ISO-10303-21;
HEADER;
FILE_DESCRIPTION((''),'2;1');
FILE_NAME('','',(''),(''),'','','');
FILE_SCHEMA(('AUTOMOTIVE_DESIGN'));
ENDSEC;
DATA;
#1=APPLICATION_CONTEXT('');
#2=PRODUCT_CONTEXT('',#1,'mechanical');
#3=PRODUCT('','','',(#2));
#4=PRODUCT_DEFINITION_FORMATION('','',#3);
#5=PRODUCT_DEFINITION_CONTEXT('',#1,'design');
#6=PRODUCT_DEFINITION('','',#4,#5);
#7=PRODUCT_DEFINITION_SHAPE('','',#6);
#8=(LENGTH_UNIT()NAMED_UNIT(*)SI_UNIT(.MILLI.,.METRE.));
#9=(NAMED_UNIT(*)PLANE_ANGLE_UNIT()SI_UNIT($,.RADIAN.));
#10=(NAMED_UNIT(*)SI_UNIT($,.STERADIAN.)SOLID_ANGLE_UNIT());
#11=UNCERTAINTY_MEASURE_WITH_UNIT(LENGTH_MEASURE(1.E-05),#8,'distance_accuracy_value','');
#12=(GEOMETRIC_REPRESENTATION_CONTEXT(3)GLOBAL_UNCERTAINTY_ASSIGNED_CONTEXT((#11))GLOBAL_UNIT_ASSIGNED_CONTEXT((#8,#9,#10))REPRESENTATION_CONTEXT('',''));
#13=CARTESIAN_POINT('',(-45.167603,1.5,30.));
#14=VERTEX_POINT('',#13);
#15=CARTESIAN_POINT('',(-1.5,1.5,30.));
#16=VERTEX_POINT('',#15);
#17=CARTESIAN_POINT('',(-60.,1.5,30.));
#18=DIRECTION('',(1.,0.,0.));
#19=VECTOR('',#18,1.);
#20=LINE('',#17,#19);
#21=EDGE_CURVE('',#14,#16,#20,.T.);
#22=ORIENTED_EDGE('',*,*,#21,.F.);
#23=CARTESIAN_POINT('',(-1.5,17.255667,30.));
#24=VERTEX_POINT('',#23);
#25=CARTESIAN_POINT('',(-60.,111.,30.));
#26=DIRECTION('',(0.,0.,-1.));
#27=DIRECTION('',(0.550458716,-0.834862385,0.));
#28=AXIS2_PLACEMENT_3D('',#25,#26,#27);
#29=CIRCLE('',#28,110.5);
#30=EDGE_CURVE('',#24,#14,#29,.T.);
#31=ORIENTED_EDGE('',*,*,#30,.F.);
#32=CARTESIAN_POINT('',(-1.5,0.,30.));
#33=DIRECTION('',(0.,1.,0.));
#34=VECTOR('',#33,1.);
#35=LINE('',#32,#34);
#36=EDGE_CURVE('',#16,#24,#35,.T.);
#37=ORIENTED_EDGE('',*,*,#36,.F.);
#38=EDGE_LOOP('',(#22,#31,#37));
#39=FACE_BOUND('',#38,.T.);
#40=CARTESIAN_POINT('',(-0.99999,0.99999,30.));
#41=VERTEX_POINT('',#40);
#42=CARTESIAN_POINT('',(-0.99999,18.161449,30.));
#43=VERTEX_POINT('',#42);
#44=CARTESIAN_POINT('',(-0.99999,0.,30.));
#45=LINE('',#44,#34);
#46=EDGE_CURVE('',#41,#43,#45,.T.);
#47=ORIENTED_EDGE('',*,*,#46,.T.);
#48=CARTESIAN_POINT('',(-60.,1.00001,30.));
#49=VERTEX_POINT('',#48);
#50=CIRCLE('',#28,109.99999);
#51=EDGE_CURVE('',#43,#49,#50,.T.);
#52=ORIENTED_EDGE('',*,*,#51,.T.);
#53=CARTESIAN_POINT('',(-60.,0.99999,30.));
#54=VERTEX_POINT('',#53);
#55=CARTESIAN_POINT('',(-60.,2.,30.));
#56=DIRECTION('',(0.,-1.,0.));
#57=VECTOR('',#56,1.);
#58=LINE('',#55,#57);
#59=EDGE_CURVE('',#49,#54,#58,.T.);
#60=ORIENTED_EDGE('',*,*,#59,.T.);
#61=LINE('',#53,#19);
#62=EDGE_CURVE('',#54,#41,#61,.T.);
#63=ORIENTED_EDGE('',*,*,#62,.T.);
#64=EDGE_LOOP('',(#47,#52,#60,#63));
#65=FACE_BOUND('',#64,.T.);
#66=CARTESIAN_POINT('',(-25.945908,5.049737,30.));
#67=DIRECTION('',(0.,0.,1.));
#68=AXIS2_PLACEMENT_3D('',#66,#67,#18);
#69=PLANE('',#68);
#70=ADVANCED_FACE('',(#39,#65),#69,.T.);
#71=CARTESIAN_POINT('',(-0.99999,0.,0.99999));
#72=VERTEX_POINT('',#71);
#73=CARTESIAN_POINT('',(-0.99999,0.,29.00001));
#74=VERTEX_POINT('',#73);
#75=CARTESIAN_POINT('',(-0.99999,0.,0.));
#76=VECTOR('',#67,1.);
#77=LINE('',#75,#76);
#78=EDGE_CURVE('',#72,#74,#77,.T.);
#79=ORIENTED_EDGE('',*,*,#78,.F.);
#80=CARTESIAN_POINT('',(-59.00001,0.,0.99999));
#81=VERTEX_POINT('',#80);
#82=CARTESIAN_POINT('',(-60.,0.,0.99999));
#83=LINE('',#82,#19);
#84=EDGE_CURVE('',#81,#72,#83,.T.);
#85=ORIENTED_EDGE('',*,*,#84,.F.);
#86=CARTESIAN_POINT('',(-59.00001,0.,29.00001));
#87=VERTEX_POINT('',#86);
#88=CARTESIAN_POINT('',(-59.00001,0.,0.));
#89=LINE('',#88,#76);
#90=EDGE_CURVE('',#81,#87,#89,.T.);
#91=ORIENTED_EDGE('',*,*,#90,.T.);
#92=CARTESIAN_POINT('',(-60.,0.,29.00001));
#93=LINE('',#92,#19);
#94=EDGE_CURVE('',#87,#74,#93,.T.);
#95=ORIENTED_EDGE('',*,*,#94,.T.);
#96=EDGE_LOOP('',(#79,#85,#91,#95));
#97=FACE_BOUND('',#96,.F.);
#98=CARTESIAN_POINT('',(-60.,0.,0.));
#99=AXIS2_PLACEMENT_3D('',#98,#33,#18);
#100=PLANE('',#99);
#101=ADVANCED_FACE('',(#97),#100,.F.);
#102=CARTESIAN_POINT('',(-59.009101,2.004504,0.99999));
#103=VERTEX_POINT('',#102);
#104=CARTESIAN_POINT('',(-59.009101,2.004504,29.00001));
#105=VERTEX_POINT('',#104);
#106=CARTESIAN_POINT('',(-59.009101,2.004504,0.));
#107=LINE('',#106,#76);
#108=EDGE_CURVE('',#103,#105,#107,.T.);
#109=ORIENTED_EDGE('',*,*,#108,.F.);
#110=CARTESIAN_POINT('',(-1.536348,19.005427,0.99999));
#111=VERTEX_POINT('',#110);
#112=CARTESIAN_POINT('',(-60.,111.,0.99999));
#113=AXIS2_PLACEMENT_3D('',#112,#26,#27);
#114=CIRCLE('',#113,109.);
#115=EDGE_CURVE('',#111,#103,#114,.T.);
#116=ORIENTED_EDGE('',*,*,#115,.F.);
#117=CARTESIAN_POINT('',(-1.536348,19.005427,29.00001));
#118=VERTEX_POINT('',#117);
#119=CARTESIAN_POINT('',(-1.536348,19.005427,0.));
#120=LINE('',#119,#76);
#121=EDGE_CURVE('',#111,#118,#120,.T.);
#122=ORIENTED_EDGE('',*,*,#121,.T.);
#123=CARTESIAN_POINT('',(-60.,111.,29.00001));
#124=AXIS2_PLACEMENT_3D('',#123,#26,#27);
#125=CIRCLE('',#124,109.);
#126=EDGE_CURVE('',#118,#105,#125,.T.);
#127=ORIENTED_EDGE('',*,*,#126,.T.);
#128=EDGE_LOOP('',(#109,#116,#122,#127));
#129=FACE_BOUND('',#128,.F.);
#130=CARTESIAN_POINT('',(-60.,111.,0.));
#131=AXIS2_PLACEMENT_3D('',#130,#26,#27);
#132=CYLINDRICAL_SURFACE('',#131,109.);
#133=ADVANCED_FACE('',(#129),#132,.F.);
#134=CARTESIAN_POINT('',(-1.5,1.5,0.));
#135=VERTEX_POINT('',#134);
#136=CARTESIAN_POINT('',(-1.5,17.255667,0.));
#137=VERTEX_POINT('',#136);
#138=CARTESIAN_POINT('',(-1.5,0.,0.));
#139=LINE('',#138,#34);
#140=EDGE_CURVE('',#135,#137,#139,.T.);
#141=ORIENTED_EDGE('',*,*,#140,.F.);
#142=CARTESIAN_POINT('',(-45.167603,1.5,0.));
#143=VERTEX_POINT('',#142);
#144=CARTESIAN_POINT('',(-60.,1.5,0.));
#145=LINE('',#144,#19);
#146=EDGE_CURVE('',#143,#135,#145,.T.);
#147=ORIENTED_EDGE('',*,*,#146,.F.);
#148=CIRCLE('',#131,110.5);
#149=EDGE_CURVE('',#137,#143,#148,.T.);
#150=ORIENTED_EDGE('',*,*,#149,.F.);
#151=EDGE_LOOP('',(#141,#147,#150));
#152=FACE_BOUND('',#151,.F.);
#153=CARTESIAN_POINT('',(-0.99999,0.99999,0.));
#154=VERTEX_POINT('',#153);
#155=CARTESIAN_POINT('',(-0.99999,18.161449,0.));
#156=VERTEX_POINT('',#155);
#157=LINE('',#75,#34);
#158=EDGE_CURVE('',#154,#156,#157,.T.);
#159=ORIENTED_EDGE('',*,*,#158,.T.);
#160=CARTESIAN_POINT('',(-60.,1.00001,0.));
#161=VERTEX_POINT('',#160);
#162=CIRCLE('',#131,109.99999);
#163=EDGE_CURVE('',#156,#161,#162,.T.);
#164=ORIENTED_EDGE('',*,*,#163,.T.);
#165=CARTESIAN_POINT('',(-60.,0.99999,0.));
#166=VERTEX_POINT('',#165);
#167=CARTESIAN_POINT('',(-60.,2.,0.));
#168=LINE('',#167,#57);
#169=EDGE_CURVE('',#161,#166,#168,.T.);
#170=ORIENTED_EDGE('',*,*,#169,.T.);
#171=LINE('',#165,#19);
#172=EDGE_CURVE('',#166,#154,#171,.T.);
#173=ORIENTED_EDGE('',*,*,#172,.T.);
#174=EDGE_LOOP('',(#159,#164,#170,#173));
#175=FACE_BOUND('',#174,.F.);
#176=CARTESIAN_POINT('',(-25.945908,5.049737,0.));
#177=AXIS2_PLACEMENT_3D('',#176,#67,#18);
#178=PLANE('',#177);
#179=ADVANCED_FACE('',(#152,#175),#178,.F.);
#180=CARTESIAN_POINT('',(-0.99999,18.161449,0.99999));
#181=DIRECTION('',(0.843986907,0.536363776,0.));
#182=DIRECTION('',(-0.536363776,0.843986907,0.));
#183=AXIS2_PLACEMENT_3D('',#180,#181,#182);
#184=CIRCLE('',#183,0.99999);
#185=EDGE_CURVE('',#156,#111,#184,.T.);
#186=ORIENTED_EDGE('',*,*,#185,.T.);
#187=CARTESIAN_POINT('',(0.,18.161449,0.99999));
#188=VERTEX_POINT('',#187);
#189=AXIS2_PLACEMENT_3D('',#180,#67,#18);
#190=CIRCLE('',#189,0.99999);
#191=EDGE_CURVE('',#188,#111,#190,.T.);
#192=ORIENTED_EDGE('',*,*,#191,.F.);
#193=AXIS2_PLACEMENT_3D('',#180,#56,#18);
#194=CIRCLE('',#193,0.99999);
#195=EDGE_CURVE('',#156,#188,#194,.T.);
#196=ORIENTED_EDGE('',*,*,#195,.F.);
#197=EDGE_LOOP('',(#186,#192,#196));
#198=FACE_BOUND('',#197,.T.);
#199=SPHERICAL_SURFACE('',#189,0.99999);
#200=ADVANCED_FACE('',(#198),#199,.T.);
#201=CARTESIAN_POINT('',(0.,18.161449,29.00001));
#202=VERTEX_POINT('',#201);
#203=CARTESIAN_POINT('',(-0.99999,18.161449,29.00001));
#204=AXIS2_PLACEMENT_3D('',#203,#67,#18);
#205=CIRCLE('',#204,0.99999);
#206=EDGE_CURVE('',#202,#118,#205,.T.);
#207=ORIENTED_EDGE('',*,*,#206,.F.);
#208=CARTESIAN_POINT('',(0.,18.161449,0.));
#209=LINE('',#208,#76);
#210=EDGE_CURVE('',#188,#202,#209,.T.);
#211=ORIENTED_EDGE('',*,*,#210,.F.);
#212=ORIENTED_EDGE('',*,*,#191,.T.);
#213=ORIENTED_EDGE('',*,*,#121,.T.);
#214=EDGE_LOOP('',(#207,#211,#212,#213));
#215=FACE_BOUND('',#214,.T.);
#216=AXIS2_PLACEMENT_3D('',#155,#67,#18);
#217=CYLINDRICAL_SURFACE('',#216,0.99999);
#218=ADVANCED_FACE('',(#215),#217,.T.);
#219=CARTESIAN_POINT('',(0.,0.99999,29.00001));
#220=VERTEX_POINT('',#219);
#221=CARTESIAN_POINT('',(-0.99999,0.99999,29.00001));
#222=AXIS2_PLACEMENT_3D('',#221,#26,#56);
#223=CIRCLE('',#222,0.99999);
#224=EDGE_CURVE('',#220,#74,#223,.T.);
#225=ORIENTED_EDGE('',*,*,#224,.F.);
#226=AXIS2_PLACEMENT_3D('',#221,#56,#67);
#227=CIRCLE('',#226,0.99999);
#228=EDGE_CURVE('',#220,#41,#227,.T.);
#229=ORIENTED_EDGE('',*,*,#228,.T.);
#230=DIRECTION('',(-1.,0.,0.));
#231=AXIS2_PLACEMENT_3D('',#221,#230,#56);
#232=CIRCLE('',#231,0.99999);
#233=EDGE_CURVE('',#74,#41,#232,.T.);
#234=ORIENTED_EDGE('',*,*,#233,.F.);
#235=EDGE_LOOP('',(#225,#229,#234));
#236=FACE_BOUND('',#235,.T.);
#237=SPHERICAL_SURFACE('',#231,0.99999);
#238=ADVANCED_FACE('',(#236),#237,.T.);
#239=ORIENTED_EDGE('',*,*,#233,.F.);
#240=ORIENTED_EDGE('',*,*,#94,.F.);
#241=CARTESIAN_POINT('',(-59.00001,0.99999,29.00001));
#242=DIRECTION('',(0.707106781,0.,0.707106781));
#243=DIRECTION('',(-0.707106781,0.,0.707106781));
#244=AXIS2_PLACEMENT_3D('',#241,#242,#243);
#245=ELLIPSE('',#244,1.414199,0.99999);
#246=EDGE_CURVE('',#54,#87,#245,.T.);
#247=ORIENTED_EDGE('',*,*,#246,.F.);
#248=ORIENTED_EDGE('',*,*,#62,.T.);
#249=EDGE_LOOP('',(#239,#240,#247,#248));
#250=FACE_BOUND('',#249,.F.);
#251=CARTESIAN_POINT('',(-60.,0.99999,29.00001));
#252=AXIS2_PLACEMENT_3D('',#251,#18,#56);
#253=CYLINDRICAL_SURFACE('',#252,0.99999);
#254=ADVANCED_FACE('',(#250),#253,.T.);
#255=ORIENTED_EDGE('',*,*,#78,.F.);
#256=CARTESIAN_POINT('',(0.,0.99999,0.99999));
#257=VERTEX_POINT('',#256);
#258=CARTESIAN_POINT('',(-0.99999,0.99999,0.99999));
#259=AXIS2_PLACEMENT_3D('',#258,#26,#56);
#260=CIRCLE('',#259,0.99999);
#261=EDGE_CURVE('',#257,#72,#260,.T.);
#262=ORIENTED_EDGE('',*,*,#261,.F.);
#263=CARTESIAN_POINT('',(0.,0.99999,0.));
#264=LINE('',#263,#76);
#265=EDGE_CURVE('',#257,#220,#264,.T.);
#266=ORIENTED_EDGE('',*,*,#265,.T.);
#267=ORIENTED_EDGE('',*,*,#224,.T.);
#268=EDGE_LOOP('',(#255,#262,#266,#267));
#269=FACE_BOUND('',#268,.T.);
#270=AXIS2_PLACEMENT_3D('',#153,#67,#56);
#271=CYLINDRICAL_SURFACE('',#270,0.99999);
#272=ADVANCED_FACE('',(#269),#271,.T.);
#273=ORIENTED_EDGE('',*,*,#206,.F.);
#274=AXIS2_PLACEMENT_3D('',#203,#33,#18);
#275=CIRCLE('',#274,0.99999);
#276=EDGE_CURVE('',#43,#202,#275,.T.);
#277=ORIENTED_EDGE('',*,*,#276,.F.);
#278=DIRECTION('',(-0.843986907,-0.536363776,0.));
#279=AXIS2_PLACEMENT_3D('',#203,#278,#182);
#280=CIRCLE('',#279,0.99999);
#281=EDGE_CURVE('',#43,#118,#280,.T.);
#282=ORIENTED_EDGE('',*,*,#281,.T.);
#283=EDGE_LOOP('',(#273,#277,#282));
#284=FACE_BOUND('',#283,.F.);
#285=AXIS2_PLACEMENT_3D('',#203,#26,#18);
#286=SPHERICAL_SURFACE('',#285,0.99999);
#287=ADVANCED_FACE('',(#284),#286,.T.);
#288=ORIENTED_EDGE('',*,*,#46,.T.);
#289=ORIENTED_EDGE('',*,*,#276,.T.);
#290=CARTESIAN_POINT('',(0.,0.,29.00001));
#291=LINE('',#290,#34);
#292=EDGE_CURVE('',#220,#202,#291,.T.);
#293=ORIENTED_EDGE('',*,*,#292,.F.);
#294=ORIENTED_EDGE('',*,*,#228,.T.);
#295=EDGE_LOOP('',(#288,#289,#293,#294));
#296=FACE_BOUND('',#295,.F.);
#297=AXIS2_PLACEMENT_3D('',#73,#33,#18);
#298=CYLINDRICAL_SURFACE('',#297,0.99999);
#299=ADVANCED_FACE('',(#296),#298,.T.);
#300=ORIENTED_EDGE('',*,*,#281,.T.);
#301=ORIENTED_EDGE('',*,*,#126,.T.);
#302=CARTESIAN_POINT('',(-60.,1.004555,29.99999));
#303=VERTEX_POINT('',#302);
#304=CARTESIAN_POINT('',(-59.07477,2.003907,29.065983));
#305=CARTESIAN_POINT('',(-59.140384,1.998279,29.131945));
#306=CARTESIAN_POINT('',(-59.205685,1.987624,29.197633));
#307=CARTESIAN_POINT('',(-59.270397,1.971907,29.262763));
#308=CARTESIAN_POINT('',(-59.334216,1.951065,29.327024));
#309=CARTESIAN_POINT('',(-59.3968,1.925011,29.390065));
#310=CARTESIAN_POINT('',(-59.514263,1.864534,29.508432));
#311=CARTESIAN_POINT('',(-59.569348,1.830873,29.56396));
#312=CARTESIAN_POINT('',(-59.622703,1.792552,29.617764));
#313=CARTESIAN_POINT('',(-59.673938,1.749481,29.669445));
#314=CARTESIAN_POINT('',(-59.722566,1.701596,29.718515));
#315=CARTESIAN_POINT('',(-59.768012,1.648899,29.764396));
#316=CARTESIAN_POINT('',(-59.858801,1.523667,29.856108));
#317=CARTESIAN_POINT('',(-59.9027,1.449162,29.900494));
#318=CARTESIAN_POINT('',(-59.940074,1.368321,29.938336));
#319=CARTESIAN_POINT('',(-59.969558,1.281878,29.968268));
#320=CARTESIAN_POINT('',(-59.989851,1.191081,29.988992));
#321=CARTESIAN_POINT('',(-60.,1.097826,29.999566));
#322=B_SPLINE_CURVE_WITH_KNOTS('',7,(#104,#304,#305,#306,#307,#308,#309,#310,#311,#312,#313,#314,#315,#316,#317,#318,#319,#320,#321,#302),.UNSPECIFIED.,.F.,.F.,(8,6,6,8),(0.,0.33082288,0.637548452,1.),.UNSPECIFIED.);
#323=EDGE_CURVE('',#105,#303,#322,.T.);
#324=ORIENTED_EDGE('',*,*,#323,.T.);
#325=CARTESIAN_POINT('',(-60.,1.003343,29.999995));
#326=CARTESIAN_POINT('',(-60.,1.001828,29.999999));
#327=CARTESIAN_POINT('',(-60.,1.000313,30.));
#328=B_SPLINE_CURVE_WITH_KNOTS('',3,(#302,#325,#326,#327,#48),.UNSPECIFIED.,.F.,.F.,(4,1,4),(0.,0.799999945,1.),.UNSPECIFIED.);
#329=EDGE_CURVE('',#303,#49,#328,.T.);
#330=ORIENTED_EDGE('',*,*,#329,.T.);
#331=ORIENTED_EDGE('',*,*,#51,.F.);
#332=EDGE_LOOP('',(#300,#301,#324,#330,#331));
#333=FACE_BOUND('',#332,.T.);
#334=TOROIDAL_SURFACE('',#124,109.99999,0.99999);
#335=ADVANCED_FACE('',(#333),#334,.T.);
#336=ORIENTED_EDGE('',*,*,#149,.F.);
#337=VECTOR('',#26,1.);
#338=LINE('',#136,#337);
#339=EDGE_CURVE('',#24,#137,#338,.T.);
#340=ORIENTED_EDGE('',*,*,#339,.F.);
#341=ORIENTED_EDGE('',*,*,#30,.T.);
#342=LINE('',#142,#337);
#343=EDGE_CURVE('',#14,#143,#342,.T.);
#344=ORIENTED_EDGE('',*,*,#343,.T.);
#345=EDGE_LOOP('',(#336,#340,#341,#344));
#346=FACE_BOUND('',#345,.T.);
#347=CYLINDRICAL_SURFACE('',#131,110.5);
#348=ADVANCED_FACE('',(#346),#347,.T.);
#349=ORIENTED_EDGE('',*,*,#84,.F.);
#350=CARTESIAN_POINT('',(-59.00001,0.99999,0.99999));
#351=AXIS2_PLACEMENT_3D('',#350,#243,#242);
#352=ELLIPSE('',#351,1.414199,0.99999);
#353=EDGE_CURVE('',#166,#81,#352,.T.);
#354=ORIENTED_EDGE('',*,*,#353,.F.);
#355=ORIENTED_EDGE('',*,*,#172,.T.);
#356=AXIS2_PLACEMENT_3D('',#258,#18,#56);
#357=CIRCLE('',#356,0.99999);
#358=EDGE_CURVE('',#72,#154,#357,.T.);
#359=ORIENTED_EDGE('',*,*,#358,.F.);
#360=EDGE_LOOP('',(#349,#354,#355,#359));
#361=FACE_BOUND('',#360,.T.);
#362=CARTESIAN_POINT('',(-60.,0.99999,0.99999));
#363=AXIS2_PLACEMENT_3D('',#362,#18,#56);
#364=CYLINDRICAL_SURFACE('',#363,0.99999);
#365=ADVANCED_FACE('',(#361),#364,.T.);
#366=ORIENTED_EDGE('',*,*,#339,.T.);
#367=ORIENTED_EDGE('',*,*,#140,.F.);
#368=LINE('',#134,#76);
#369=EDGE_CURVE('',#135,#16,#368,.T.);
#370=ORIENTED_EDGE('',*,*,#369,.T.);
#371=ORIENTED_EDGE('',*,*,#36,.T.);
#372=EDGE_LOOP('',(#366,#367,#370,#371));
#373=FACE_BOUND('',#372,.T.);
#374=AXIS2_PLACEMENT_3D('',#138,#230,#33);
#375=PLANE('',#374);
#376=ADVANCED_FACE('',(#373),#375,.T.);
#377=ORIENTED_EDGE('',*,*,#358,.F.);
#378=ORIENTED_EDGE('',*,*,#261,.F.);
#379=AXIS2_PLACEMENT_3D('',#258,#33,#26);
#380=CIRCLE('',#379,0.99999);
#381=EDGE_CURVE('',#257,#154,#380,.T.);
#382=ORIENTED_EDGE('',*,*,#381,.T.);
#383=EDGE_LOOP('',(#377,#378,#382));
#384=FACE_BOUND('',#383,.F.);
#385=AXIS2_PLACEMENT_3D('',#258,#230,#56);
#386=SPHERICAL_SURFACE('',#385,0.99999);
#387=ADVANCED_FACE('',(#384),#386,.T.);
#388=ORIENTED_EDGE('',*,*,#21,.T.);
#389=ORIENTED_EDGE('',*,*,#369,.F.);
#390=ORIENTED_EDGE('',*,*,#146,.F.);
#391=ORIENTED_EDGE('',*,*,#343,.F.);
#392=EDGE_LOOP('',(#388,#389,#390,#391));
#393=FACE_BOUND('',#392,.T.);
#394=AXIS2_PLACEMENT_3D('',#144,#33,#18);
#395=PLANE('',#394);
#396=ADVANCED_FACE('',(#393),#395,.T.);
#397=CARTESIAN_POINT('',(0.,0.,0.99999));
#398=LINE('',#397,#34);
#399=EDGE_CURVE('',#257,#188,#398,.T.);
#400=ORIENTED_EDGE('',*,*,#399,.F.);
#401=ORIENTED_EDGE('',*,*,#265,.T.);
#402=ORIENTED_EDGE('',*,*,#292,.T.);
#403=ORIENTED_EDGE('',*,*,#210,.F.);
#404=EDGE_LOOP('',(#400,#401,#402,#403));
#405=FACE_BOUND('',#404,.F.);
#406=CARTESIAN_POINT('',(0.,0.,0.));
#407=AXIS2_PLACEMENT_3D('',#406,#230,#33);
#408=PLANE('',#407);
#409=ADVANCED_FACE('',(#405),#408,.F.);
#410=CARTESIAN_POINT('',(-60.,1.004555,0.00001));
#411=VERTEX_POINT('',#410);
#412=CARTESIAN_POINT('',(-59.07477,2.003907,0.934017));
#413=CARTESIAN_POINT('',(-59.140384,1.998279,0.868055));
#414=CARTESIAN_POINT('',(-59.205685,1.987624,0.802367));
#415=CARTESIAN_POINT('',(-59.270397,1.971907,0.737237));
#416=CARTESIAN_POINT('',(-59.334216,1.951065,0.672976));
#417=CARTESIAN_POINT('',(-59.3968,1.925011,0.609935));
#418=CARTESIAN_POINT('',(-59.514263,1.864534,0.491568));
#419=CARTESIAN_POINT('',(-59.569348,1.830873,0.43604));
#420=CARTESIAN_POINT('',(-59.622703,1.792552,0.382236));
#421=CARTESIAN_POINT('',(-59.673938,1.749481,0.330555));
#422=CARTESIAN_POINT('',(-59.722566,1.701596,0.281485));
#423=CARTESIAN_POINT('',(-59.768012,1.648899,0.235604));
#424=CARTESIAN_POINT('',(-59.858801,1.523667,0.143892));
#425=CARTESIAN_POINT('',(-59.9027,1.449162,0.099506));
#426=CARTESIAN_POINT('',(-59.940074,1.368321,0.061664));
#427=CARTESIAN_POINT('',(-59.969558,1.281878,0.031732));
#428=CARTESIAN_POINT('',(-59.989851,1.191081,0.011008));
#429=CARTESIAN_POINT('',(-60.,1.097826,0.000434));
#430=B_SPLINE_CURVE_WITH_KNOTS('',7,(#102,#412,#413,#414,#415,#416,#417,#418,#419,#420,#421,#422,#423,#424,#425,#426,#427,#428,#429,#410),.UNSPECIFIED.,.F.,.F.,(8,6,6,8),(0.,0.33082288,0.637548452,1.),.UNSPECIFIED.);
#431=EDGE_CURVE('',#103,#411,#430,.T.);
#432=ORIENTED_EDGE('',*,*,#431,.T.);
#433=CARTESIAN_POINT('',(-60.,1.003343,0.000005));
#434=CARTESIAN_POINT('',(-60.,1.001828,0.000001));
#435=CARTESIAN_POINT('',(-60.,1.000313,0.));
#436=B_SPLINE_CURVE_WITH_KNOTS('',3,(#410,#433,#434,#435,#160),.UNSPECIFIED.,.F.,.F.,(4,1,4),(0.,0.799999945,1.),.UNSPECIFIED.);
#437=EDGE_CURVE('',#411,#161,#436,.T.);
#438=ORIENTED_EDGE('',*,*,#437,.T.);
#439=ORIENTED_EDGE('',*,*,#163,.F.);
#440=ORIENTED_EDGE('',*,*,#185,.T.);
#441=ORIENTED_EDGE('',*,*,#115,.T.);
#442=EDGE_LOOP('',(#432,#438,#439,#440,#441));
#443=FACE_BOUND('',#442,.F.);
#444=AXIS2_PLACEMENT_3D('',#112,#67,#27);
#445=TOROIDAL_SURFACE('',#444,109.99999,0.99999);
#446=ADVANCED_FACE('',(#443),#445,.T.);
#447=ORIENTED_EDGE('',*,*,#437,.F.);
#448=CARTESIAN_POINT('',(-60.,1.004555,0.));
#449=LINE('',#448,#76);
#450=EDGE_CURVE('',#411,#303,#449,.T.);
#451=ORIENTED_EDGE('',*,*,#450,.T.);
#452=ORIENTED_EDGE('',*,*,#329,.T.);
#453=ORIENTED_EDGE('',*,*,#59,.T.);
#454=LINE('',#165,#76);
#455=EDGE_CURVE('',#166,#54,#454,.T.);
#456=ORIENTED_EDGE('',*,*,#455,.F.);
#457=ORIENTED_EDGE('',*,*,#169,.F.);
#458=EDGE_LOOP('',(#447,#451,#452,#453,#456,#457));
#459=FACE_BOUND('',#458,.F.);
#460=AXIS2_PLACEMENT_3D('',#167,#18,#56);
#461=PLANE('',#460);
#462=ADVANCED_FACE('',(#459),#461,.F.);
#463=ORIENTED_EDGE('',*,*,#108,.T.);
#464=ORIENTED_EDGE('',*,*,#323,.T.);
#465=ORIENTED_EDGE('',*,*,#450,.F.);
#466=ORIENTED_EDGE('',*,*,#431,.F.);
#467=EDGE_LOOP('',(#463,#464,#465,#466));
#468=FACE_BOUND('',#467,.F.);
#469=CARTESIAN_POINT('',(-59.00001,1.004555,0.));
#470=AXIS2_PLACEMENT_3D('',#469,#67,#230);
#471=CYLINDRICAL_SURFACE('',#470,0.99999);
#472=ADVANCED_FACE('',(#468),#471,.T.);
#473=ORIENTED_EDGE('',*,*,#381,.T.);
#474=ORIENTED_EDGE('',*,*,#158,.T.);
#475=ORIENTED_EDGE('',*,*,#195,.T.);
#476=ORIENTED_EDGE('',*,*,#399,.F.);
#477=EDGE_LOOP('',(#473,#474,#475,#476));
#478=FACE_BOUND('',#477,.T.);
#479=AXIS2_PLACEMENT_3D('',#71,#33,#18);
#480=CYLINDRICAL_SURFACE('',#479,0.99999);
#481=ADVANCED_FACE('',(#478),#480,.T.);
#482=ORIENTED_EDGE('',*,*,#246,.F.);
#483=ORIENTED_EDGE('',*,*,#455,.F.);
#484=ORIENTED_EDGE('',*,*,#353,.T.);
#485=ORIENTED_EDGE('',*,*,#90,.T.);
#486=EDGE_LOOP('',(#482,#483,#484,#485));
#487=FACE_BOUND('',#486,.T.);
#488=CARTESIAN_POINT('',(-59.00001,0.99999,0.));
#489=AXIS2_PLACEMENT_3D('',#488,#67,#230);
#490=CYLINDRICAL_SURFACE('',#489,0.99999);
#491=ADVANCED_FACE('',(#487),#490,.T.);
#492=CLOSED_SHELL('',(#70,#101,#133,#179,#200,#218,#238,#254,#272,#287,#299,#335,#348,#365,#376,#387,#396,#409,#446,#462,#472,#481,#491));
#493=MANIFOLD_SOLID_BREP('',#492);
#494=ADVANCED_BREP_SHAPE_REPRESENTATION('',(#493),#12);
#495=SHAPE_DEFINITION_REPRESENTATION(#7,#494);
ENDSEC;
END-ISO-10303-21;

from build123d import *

# Parameters (mm, degrees)
F1_DEPTH = 30
F2_T     = -1.5
F3_R     = 0.99999


# Not quite as in the source:
# - a fillet or chamfer is up to 0.001 mm smaller than in the source, because OpenCascade refuses the exact size


with BuildPart() as f1:
    # F0 (on Top) → F1 (new body)
    with BuildSketch(Plane.XY):
        with BuildLine():
            Line((-60, 2), (-60, 0))
            Line((-60, 0), (0, 0))
            Line((0, 0), (0, 20))
            ThreePointArc((0, 20), (-28.6790804733, 6.5969349109), (-60, 2))
        make_face()
    extrude(amount=F1_DEPTH)

    # F2
    f2_openings = [f1.faces().sort_by_distance(p)[0] for p in [
        (-18.660264, 5.692192, 30),
        (-18.660264, 5.692192, 0),
    ]]
    offset(amount=F2_T, openings=f2_openings)

    # F3 (radius 1 in the source; OpenCascade refuses exactly that, so slightly less here)
    f3_edges = [f1.edges().sort_by_distance(p)[0] for p in [
        (-60, 2, 15),
        (-60, 0, 15),
        (-28.67908, 6.596935, 30),
        (-30, 0, 30),
        (-28.67908, 6.596935, 0),
        (-30, 0, 0),
        (0, 20, 15),
        (0, 0, 15),
        (0, 10, 30),
        (0, 10, 0),
    ]]
    fillet(f3_edges, radius=F3_R)


solid = f1.part
